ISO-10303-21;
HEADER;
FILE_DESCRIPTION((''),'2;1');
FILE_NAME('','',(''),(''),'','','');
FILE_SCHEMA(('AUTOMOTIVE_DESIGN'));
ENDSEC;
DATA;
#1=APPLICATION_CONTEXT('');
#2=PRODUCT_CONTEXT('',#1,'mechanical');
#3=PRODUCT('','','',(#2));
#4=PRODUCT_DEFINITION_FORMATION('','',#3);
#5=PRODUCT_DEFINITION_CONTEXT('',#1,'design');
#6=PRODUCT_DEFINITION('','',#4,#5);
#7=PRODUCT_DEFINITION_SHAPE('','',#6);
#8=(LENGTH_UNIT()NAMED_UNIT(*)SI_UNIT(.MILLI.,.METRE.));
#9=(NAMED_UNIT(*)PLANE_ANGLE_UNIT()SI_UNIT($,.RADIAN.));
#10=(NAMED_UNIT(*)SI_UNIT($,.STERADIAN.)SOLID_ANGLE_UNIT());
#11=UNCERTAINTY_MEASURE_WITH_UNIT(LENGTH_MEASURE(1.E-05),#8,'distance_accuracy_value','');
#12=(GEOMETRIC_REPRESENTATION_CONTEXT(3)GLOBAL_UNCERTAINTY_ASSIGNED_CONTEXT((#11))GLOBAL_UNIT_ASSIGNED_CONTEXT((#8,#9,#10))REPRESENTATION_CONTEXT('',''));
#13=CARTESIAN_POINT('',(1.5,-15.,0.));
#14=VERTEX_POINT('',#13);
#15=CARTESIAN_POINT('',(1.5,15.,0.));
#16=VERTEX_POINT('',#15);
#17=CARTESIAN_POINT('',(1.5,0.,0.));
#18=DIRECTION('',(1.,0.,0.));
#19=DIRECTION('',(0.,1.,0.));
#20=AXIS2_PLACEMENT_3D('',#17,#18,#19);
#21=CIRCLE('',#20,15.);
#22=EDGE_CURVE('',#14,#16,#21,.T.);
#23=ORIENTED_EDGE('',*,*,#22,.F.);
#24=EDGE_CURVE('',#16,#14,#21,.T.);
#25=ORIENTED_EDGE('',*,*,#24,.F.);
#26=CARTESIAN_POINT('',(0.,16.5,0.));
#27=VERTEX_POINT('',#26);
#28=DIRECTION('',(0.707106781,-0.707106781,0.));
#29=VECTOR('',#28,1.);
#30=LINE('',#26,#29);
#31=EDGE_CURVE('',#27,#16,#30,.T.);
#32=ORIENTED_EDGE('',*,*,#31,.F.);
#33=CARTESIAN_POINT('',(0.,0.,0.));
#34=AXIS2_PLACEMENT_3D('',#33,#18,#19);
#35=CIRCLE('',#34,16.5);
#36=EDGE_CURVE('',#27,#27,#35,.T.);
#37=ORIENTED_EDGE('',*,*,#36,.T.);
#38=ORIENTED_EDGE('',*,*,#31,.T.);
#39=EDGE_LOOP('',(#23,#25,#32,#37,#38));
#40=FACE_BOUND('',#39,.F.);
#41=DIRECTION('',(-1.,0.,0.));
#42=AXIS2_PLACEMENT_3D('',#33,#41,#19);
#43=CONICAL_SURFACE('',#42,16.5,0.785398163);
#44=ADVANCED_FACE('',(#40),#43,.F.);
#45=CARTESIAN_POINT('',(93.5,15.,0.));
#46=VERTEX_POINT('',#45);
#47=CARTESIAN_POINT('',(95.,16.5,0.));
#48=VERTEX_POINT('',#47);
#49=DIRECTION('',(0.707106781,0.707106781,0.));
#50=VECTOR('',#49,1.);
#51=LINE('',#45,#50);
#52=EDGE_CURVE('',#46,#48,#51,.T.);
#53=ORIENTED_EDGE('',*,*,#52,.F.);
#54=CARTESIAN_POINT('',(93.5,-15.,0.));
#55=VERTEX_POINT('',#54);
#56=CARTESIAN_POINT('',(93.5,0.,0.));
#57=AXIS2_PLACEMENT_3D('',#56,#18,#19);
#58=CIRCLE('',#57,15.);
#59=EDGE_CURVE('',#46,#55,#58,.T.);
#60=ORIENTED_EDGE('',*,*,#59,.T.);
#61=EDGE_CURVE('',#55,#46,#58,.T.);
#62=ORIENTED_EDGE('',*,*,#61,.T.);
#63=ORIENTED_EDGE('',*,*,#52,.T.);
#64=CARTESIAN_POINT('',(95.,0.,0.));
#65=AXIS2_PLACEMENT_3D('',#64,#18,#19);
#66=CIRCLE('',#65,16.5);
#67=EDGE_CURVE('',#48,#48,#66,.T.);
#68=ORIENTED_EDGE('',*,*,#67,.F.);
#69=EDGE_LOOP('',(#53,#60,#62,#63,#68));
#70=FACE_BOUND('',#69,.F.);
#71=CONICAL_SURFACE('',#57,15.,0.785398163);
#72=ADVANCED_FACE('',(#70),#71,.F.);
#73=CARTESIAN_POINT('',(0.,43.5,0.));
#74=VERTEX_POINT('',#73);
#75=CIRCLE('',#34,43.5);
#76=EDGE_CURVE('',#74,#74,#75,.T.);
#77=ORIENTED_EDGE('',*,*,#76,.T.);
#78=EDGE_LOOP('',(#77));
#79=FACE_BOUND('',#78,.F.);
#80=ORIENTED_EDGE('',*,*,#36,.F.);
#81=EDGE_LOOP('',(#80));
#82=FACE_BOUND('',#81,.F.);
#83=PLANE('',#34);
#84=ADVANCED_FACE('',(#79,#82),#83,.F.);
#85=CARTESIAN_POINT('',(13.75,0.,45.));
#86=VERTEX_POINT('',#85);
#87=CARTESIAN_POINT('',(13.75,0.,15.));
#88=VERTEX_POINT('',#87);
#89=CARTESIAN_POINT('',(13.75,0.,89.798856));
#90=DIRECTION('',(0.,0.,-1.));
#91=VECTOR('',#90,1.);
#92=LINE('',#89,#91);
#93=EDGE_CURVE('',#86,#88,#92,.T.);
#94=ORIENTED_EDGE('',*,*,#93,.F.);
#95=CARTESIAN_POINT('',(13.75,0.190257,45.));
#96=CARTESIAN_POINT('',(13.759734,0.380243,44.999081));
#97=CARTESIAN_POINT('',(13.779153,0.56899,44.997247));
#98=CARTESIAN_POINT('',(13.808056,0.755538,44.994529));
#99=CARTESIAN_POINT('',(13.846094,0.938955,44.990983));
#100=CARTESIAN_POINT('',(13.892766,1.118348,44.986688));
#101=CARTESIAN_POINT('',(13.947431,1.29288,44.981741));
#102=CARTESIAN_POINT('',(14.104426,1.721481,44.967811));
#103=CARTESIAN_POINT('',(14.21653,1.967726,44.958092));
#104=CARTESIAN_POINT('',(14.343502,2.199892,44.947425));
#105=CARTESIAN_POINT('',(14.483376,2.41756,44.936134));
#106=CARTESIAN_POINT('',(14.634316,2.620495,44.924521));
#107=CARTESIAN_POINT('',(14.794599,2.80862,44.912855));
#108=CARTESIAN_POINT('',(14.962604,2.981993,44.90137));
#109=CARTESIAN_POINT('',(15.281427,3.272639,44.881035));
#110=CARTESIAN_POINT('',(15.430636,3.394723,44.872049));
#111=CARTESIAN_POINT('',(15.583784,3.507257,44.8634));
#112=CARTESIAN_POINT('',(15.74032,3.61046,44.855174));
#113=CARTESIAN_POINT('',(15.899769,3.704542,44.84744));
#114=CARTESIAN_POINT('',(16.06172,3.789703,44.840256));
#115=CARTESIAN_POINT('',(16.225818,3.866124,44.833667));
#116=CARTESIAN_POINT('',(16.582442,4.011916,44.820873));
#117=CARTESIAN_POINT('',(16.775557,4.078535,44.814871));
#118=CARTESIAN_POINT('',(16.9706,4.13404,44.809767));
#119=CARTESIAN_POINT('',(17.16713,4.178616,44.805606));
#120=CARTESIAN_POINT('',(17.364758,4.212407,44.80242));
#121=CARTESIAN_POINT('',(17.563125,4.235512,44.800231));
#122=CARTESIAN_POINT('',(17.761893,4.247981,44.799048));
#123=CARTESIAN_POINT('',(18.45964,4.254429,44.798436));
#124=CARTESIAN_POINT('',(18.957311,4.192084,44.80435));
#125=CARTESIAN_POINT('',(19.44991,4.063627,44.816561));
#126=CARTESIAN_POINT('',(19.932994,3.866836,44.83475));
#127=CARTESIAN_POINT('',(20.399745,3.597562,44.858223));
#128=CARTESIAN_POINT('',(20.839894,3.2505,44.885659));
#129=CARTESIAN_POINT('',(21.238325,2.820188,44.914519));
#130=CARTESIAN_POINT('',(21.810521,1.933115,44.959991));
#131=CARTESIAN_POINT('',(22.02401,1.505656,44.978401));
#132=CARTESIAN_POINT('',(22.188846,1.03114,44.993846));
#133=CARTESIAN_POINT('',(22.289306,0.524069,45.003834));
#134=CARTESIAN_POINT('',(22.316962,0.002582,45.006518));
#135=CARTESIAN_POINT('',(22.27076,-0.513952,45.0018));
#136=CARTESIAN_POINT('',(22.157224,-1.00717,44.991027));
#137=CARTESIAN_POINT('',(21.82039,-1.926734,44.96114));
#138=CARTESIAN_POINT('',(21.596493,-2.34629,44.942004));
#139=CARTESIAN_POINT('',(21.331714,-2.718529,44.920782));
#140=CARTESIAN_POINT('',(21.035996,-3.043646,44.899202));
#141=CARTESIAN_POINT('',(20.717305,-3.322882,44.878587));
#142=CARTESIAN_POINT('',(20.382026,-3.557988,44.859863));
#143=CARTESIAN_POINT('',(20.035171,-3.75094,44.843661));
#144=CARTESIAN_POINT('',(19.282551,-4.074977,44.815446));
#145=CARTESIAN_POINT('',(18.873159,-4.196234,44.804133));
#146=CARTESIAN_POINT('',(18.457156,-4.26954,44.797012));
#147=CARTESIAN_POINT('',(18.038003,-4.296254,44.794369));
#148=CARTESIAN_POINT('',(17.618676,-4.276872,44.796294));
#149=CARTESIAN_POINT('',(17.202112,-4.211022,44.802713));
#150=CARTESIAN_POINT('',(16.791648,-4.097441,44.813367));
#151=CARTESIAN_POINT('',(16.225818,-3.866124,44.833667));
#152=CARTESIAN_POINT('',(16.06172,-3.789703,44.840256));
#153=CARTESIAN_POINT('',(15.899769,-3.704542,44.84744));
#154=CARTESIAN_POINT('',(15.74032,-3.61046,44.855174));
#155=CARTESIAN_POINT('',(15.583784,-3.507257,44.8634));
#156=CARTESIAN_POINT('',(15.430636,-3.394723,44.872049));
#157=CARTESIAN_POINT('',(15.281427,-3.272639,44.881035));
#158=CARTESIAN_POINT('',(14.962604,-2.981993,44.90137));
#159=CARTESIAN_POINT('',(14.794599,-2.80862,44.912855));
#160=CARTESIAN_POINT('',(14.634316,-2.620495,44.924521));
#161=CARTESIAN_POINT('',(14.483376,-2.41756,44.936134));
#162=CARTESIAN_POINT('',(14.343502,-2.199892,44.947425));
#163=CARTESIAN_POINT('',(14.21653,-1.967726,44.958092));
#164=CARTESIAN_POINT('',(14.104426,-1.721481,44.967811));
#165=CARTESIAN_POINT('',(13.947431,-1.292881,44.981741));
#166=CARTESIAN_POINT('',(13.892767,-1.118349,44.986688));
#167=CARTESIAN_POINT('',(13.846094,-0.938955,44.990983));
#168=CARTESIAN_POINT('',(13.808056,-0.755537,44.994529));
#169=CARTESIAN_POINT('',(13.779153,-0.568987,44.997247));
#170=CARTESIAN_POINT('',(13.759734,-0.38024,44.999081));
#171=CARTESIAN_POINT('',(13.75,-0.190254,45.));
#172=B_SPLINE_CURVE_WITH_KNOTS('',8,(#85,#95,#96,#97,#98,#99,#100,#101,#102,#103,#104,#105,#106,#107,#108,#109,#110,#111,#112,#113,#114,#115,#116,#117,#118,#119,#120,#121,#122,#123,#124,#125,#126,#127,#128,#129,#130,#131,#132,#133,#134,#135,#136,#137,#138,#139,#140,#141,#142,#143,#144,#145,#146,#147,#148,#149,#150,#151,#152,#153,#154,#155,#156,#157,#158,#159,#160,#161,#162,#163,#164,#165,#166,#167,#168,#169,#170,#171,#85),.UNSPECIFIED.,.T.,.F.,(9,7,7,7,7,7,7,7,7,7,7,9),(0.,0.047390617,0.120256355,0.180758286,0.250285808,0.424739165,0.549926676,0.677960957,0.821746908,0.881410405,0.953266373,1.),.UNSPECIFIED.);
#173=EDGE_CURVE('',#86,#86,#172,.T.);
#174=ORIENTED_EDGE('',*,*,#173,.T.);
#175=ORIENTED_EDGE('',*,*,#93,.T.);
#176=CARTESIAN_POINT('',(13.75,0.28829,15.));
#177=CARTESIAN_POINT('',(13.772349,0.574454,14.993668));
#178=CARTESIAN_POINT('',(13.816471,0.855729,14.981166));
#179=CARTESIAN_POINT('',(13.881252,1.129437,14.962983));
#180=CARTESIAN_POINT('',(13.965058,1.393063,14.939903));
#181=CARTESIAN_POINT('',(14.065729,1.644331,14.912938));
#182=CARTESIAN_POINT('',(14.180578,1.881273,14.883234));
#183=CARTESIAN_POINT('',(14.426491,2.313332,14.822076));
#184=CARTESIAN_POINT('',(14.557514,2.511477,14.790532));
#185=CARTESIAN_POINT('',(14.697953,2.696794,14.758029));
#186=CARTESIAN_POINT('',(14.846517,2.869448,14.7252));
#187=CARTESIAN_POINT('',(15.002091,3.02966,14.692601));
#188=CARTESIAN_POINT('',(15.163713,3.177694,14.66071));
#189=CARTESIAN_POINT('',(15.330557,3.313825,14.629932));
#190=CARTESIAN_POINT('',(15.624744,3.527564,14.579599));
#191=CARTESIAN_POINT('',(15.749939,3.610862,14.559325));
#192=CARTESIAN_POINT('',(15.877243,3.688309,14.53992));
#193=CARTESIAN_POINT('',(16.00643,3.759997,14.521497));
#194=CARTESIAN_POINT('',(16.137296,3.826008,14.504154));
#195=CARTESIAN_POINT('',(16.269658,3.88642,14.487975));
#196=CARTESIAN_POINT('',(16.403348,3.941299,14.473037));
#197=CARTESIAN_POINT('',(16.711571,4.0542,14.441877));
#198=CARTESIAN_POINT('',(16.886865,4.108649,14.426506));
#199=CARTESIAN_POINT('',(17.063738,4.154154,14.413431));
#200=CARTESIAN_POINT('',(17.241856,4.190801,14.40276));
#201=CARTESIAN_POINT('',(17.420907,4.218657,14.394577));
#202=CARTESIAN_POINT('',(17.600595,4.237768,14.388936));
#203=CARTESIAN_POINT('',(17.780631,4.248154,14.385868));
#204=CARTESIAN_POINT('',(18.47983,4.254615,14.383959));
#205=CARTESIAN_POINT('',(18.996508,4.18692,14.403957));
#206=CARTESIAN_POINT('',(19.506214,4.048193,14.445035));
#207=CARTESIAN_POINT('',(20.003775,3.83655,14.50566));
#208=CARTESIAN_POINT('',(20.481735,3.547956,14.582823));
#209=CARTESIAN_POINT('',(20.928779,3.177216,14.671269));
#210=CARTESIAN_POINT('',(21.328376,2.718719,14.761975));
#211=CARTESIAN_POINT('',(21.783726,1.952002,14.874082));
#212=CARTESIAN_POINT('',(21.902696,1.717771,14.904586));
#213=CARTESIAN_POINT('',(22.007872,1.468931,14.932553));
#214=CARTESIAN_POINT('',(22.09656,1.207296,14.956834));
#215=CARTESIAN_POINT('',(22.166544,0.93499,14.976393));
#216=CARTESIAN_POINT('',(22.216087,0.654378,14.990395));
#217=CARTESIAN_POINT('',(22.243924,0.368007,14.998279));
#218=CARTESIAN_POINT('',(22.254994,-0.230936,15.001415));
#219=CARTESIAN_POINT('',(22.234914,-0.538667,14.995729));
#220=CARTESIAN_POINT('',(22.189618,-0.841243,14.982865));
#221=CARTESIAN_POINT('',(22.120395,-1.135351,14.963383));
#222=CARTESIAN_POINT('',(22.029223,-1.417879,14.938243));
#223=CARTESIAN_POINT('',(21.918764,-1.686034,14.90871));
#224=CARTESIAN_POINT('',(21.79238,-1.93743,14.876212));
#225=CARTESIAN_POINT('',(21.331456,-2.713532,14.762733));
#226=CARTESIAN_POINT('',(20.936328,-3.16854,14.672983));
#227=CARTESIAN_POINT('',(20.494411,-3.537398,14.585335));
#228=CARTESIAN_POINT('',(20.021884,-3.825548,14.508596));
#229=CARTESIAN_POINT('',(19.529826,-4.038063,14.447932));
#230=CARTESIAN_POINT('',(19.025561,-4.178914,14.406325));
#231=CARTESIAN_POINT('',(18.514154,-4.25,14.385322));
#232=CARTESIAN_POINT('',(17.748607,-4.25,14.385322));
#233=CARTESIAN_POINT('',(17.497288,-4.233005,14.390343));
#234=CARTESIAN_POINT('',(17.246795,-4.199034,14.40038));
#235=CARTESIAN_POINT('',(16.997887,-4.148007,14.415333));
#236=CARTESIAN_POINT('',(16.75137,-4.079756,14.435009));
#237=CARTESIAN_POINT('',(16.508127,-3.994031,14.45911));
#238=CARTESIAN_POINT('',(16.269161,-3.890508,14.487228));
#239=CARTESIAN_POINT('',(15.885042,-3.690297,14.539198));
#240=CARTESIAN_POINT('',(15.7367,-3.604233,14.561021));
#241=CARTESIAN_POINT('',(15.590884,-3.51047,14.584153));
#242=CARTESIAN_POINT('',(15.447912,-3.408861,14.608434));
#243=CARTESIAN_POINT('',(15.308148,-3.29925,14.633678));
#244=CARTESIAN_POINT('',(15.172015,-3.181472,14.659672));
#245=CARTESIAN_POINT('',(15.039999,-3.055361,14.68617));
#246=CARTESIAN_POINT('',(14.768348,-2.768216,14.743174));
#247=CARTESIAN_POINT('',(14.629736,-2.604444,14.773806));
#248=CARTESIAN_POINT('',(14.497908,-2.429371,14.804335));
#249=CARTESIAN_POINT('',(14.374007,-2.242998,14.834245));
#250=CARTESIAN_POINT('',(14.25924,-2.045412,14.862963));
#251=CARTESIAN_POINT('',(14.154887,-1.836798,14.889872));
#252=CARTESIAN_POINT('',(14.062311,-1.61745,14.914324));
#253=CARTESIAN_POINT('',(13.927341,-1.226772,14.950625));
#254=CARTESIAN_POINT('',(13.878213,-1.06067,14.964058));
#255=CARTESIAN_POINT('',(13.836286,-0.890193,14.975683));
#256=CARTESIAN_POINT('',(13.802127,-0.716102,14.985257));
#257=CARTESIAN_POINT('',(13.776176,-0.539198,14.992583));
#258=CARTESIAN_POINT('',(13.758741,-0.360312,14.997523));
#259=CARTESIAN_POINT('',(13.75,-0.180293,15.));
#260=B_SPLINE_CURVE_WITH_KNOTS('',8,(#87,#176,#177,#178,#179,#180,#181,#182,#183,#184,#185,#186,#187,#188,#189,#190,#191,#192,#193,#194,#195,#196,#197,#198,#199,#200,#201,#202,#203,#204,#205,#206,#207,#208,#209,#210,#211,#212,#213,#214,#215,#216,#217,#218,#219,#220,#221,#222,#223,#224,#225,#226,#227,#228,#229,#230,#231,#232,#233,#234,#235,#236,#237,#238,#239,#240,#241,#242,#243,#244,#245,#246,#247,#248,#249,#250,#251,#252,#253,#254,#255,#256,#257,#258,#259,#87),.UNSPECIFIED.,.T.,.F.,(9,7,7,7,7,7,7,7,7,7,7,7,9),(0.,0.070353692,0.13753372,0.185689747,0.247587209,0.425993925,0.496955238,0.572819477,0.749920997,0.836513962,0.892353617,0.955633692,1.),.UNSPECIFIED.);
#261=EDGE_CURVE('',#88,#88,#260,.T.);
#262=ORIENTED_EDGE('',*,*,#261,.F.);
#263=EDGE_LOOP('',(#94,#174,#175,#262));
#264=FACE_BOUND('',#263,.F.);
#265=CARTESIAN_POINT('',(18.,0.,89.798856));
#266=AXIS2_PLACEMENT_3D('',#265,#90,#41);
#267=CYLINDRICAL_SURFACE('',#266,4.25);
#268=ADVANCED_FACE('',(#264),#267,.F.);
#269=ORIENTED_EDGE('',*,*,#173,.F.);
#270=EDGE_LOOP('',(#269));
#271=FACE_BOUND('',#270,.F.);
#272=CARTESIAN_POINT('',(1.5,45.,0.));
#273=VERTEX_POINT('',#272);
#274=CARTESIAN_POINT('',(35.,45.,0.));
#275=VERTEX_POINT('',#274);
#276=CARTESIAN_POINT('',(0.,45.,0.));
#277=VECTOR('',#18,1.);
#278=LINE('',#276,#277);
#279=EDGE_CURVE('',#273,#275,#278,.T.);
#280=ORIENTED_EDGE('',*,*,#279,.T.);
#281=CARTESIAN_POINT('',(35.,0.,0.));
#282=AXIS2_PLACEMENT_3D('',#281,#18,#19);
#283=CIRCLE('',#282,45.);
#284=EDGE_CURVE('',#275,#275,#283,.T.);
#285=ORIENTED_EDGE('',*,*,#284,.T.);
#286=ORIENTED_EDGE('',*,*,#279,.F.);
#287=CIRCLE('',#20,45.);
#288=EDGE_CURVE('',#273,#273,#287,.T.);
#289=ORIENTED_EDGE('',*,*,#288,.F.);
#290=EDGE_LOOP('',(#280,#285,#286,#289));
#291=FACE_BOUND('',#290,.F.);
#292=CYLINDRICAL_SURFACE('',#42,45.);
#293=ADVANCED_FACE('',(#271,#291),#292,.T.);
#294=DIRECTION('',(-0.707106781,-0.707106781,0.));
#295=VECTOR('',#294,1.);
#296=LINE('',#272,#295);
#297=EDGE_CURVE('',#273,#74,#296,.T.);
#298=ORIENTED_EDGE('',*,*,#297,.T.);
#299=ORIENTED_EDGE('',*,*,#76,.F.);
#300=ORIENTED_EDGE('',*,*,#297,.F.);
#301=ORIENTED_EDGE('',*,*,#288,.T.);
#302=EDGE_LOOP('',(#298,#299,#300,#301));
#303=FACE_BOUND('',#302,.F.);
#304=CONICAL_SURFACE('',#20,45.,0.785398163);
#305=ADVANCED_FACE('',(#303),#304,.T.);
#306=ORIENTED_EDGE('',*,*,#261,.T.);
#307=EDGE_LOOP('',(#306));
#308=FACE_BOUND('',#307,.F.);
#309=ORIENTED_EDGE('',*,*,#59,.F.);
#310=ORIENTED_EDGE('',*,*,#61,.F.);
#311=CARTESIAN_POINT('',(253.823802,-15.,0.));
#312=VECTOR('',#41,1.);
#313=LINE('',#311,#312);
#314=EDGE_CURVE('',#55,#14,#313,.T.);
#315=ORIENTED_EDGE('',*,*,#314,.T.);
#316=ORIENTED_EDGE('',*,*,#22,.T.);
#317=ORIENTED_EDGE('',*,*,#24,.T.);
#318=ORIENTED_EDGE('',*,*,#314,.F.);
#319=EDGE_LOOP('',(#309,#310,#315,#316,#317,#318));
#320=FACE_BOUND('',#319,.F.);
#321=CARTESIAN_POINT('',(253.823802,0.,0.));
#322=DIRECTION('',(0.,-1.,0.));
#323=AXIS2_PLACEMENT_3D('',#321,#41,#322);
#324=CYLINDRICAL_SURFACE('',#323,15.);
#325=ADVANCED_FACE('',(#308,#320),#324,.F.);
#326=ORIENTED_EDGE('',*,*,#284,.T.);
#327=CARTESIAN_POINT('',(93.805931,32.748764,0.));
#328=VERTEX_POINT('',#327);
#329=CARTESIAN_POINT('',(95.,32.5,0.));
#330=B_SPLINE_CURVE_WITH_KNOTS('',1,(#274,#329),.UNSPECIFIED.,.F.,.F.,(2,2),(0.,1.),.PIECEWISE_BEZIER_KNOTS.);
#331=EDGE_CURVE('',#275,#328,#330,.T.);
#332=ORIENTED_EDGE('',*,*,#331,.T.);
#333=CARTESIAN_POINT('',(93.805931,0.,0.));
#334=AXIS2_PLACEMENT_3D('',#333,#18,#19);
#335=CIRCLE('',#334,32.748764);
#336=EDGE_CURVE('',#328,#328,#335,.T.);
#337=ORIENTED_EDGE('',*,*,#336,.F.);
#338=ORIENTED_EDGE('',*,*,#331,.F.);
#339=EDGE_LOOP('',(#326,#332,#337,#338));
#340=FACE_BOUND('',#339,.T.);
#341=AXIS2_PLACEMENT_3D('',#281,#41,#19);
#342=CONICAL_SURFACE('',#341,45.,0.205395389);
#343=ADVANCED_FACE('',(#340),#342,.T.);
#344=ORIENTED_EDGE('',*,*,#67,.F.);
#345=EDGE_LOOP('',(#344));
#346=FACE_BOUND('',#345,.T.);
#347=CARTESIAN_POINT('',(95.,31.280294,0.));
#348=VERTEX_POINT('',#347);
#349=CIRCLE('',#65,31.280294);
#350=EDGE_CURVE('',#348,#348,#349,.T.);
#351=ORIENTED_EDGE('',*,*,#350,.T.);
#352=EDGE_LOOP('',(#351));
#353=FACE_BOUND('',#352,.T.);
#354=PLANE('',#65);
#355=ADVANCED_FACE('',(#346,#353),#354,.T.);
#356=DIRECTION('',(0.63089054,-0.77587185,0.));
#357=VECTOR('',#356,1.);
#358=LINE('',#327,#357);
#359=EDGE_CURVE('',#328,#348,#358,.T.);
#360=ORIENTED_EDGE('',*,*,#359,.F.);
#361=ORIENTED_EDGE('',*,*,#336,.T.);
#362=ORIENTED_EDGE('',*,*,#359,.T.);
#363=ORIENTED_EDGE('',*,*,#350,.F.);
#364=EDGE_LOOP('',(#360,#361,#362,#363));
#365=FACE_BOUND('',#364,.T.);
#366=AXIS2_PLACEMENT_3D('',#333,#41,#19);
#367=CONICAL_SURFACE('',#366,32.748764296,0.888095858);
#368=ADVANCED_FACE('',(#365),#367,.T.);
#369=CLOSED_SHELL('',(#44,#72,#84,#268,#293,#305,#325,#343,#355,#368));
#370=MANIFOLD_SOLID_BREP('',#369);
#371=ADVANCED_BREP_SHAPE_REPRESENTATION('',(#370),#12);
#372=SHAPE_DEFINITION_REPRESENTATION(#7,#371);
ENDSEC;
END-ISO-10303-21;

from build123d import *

# Parameters (mm, degrees)
F0_R      = 45
F3_DEPTH  = 35
F4_R      = 45
F2_R      = 32.5
F9_D      = 30
F10_D     = 8.5
F10_DEPTH = 45
F10_START = 0.2011441
F10_TIP   = 2.5536576309


# Not quite as in the source:
# - a fillet or chamfer that OpenCascade refuses, or shapes differently, is made with other operations: its cross-section is extruded or revolved along the edge and cut away or added


with BuildPart() as f3:
    # F0 (on Right) → F3 (new body)
    with BuildSketch(Plane.YZ):
        Circle(F0_R)
    extrude(amount=F3_DEPTH)

    # F4 (on face) → F5 section 0
    with BuildSketch(Plane.YZ.offset(35)):
        Circle(F4_R)
    # F2 (on offset) → F5 section 1
    with BuildSketch(Plane.YZ.offset(95)):
        Circle(F2_R)
    loft()

    # F9 (through all)
    with Locations(Plane.YZ.offset(95)):
        with Locations((0, 0)):
            Hole(F9_D / 2)

    # F10
    # its depths count from where the whole tool has entered the part; down to there all is cleared
    with Locations(Plane.XY.offset(45).offset(-F10_START)):
        with Locations((18, 0)):
            Hole(F10_D / 2, depth=F10_DEPTH)
            with Locations((0, 0, -(F10_DEPTH + F10_TIP / 2))):  # 118° drill point
                Cone(0, F10_D / 2, F10_TIP, mode=Mode.SUBTRACT)

    # F11: chamfer of 1.5 on 4 edges, made by hand

    # F11_s1 → F11_t2 (revolve, cut)
    with BuildSketch(Plane.XY):
        Polygon((93.8059313812, 32.7487642956), (95, 31.280293666), (95, 32.5), align=None)
    revolve(axis=Axis((95, 0, 0), (1, 0, 0)), mode=Mode.SUBTRACT)

    # F11_s3 → F11_t4 (revolve, cut)
    with BuildSketch(Plane.XY):
        Polygon((1.5, 45), (0, 43.5), (0, 45), align=None)
    revolve(axis=Axis((0, 0, 0), (1, 0, 0)), mode=Mode.SUBTRACT)

    # F11_s5 → F11_t6 (revolve, cut)
    with BuildSketch(Plane.XY):
        Polygon((0, 16.5), (1.5, 15), (0, 15), align=None)
    revolve(axis=Axis((0, 0, 0), (1, 0, 0)), mode=Mode.SUBTRACT)

    # F11_s7 → F11_t8 (revolve, cut)
    with BuildSketch(Plane.XY):
        Polygon((93.5, 15), (95, 16.5), (95, 15), align=None)
    revolve(axis=Axis((95, 0, 0), (1, 0, 0)), mode=Mode.SUBTRACT)


solid = f3.part
